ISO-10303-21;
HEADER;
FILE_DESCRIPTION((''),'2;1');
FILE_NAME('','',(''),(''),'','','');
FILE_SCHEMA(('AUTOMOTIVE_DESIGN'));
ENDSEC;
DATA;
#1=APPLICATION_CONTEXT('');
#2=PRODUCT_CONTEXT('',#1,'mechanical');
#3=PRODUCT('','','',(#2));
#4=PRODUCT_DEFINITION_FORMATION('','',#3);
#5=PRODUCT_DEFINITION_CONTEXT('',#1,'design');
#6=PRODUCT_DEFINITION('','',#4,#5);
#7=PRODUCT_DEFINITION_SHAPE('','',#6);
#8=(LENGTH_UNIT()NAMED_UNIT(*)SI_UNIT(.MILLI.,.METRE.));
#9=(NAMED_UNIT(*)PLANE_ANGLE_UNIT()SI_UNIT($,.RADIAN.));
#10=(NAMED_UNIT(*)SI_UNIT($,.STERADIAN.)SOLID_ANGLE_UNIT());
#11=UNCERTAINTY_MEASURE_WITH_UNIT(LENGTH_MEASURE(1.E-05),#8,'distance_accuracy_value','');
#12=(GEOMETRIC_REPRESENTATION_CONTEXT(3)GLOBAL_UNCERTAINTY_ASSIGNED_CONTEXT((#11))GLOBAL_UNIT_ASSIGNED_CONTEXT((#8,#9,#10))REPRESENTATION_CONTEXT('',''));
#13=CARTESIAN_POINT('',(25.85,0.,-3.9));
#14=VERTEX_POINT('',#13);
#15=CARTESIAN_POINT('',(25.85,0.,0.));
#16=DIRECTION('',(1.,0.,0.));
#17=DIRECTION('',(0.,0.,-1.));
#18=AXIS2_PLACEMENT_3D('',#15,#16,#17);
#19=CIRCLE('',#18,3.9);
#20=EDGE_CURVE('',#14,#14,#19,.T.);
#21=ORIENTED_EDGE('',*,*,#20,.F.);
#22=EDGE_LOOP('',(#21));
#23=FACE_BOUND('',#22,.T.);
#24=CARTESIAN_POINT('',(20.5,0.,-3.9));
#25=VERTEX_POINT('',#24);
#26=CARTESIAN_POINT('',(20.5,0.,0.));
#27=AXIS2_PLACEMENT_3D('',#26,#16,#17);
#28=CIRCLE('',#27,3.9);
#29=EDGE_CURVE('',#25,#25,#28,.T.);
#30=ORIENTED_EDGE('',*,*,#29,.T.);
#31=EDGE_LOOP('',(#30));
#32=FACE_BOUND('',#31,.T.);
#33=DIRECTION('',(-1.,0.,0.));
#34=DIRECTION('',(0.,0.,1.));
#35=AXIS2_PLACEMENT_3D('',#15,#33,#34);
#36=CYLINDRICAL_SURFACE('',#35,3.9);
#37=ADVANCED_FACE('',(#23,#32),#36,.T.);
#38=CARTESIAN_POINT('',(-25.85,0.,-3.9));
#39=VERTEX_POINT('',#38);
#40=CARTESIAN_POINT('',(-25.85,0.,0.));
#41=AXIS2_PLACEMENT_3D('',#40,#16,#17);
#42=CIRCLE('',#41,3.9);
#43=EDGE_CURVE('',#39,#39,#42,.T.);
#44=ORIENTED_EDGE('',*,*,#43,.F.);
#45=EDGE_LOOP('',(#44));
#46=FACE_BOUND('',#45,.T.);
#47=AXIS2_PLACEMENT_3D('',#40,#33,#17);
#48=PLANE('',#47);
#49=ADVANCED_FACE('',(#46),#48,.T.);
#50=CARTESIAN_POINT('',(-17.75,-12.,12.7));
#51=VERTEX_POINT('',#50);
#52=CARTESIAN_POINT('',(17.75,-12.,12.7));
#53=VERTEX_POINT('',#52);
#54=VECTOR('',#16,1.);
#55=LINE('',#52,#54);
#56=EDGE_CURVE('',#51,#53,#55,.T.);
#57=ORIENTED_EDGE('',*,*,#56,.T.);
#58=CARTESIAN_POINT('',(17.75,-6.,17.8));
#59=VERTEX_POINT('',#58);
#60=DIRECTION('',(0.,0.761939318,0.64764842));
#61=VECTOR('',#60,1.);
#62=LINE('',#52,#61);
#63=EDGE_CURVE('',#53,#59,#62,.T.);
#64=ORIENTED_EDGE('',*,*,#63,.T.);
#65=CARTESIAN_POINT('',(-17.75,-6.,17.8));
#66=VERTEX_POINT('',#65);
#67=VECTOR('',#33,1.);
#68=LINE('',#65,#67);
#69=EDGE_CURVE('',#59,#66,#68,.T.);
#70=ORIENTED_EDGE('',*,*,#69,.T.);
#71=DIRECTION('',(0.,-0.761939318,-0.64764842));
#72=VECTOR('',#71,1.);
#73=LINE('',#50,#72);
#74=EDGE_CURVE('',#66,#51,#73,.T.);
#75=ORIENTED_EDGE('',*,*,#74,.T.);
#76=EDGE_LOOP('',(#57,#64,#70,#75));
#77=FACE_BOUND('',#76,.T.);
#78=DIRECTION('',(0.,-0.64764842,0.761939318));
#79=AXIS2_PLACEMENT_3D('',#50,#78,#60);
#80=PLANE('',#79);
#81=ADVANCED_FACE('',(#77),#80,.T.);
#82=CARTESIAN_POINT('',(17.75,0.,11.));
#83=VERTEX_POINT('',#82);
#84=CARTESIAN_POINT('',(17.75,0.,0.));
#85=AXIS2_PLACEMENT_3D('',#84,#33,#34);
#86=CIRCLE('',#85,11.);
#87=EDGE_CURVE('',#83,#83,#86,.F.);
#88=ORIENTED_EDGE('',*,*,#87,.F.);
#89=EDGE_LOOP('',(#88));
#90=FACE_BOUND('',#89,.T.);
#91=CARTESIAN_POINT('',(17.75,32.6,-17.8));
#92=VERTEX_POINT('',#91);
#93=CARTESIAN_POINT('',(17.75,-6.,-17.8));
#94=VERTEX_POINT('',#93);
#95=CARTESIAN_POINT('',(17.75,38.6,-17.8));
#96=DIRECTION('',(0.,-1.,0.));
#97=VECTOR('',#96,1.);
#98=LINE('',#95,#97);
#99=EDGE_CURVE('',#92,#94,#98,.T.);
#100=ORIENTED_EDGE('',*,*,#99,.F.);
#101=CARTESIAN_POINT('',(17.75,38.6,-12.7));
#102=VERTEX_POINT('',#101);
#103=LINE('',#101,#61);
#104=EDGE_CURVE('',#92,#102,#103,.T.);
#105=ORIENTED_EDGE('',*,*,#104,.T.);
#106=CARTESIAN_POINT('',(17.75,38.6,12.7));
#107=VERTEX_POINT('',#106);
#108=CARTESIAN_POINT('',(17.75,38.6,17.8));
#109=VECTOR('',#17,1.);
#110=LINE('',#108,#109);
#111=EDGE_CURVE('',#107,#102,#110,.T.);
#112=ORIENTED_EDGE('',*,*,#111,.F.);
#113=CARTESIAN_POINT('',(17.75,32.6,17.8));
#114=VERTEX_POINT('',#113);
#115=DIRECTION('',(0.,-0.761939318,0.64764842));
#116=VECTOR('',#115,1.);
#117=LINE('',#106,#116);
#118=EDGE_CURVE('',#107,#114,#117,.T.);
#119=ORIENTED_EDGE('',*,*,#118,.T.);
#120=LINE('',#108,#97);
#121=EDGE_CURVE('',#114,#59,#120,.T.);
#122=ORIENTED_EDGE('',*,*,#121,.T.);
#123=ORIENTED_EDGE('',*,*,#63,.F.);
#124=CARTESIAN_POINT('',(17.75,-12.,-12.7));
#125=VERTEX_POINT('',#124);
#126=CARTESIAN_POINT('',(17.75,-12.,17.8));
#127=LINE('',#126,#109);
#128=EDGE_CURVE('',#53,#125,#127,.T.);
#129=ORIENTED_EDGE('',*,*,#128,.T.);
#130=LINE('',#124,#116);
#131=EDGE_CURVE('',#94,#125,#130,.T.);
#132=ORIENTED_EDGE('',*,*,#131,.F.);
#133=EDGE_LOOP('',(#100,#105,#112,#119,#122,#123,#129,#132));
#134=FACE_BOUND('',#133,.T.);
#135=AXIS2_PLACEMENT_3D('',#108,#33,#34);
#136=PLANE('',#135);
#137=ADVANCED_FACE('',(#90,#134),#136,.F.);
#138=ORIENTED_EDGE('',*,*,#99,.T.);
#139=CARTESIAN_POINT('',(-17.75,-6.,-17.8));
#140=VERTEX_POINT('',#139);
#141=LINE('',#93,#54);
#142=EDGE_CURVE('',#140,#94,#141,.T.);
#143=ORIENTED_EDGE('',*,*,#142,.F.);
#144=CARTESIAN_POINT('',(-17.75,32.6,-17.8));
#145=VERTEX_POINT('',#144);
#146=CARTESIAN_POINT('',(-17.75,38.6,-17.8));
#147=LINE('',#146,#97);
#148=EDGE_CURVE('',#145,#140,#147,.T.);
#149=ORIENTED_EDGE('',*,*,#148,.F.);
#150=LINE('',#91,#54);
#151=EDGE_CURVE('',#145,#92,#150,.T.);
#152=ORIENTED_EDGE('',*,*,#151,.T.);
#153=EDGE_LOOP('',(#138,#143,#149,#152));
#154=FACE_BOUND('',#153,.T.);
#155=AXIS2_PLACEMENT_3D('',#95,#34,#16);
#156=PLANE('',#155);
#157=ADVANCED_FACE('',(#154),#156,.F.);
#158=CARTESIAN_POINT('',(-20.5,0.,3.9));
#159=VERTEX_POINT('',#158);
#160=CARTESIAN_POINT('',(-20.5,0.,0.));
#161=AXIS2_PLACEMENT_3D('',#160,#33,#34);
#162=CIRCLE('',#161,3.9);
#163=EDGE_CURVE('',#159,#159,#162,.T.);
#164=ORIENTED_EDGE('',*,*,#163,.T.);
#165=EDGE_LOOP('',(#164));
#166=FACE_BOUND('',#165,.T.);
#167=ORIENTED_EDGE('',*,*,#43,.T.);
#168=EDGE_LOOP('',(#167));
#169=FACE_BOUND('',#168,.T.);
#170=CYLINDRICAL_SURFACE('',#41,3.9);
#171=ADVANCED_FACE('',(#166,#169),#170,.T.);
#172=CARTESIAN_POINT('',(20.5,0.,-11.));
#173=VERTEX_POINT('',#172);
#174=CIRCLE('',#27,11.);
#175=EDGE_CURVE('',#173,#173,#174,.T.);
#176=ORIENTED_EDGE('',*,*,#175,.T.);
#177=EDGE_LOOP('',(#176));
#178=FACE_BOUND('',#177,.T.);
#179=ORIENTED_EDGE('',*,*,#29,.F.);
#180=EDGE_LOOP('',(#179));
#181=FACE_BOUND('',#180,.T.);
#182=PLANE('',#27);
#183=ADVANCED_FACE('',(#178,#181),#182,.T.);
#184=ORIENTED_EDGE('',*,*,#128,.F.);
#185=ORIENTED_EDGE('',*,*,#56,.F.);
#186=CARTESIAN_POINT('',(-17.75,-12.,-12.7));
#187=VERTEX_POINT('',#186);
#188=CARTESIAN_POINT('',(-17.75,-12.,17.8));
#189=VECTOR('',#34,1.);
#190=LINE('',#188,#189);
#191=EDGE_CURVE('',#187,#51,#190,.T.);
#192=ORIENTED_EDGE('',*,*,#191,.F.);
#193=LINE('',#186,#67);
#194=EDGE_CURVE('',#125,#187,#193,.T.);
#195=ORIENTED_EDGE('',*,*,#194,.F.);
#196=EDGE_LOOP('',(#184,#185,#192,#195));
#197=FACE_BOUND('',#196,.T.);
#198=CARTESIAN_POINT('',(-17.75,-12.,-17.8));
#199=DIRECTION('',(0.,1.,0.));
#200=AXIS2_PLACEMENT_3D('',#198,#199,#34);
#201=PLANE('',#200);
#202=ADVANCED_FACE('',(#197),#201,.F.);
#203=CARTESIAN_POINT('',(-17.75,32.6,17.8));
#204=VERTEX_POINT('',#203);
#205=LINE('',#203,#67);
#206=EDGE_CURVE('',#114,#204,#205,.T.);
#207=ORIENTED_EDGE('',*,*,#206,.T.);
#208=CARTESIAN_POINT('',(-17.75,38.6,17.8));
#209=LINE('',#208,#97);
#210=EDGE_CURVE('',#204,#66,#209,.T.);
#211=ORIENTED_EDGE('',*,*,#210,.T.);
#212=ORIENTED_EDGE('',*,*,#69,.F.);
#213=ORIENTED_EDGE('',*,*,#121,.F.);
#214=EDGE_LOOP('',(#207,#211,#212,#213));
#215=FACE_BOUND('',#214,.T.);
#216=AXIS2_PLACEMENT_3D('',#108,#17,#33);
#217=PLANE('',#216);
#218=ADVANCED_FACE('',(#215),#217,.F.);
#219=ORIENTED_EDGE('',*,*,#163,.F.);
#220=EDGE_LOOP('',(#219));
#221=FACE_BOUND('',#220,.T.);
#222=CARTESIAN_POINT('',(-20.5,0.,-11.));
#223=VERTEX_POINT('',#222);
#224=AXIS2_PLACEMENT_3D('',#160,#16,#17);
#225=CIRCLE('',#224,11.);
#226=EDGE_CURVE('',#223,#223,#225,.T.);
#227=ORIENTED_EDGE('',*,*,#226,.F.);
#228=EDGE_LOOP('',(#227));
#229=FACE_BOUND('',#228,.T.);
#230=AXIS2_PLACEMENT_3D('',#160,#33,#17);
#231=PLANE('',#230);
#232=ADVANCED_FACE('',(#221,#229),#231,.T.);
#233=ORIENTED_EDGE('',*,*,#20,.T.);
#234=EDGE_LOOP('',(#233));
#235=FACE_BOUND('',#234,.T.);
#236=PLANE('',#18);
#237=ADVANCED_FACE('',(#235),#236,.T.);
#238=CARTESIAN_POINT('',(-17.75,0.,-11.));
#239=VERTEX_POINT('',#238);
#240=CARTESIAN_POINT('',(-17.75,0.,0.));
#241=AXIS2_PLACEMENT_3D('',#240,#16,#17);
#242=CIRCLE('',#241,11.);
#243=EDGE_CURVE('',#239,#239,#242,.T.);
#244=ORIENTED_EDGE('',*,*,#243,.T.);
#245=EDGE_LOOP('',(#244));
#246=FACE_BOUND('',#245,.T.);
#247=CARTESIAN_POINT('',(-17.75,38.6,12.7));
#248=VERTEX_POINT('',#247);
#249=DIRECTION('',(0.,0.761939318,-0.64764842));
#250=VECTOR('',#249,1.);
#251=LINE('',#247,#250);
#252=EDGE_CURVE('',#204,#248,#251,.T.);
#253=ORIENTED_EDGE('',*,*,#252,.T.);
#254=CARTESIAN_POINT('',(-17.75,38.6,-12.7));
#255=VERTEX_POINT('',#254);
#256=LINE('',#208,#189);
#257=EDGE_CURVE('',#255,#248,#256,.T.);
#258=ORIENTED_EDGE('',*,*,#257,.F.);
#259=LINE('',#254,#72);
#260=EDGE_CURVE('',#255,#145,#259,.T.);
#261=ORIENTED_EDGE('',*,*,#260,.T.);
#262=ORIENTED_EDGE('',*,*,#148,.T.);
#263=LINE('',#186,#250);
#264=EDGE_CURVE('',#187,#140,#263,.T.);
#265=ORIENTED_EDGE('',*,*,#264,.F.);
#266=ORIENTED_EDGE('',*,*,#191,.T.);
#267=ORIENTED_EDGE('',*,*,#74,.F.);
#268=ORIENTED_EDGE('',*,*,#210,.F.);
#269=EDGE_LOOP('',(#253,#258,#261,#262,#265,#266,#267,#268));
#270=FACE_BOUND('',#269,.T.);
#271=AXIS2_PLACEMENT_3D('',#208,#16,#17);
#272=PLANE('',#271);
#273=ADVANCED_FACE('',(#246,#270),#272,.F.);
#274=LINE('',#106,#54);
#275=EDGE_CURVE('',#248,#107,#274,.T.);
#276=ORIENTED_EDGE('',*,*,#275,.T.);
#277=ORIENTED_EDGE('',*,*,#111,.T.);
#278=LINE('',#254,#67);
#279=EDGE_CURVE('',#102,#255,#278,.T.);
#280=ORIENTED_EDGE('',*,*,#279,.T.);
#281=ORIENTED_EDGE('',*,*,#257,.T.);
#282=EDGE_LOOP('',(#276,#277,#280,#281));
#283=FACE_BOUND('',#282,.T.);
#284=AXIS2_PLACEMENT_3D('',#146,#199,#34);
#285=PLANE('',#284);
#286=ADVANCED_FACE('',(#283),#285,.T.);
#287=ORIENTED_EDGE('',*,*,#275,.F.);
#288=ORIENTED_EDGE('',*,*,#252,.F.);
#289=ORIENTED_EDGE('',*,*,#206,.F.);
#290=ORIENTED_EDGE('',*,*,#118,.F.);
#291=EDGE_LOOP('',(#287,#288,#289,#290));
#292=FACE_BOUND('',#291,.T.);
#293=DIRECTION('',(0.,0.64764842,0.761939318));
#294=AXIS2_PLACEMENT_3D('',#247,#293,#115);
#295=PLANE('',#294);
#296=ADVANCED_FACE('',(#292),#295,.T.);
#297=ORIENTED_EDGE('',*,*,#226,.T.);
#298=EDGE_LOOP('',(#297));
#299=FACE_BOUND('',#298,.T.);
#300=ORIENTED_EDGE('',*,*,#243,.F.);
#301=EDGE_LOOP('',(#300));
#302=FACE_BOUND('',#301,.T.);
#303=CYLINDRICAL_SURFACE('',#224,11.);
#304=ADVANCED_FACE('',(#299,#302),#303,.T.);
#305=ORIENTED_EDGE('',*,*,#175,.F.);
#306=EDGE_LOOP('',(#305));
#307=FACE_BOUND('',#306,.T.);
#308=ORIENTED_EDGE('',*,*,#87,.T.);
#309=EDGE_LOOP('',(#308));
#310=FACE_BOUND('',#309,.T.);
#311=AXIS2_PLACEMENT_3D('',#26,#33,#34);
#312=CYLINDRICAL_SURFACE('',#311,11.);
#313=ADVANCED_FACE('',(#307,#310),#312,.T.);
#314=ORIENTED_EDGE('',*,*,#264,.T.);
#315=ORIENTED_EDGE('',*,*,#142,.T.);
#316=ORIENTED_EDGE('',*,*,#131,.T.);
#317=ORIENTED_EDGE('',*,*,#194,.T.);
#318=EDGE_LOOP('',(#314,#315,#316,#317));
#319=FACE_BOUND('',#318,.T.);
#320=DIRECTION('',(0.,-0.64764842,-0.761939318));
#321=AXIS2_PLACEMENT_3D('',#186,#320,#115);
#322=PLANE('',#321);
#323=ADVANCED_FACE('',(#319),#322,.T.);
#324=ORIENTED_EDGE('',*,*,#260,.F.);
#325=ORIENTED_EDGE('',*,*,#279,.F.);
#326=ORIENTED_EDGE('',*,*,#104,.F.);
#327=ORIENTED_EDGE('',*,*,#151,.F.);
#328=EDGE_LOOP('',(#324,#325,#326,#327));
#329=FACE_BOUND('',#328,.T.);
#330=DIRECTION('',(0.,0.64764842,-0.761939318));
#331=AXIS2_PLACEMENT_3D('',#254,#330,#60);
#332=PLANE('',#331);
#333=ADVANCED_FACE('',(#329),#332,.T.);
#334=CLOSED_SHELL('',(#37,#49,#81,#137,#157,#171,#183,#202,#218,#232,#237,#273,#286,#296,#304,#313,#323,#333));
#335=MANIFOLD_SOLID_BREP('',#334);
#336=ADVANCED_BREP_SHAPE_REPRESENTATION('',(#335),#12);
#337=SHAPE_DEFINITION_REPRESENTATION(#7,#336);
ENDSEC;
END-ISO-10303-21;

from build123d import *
from OCP.BRepFilletAPI import BRepFilletAPI_MakeChamfer

# Parameters (mm, degrees)
SKETCH2_W           = 35.5
SKETCH2_H           = 35.6
BOSS_EXTRUDE1_DEPTH = 50.6
SKETCH3_R           = 11
BOSS_EXTRUDE2_DEPTH = 2.75
SKETCH4_R           = 3.9
BOSS_EXTRUDE3_DEPTH = 5.35
CHAMFER1_SIZE       = 6
CHAMFER1_SIZE2      = 5.1
MIRROR3_START       = -17.75
MIRROR3_DEPTH       = 35.5


# Read off the part's stored shape, not the designer's step: Mirror3
with BuildPart() as part:
    # Sketch2 → Boss-Extrude1 (new body)
    with BuildSketch(Plane(origin=(0, -12, 0), x_dir=(-1, 0, 0), z_dir=(0, 1, 0))):
        Rectangle(SKETCH2_W, SKETCH2_H)
    extrude(amount=BOSS_EXTRUDE1_DEPTH)

    # Sketch3 → Boss-Extrude2 (add)
    with BuildSketch(Plane(origin=(17.75, 0, 0), x_dir=(0, 0, -1), z_dir=(1, 0, 0))):
        with Locations(Location((0, 0, 0), (0, 0, 180))):
            Circle(SKETCH3_R)
    boss_extrude2 = extrude(amount=BOSS_EXTRUDE2_DEPTH)

    # Sketch4 → Boss-Extrude3 (add)
    with BuildSketch(Plane(origin=(20.5, 0, 0), x_dir=(0, 0, -1), z_dir=(1, 0, 0))):
        Circle(SKETCH4_R)
    boss_extrude3 = extrude(amount=BOSS_EXTRUDE3_DEPTH)

    # Chamfer1: one chamfer whose edges measure the first distance from different faces: ONE call of the kernel's chamfer builder (chamfer() names one face for all edges)
    chamfer1_edges_1 = [part.edges().sort_by_distance(p)[0] for p in [
        (0, 38.6, -17.8),
    ]]
    chamfer1_side_1 = [part.faces().sort_by_distance(p)[0] for p in [
        (0, 13.3, -17.8),
    ]]
    chamfer1_edges_2 = [part.edges().sort_by_distance(p)[0] for p in [
        (0, 38.6, 17.8),
    ]]
    chamfer1_side_2 = [part.faces().sort_by_distance(p)[0] for p in [
        (0, 13.3, 17.8),
    ]]
    chamfer1 = BRepFilletAPI_MakeChamfer(part.part.solid().wrapped)
    for e in chamfer1_edges_1:
        chamfer1.Add(CHAMFER1_SIZE, CHAMFER1_SIZE2, e.wrapped, chamfer1_side_1[0].wrapped)  # the first distance lies on this face
    for e in chamfer1_edges_2:
        chamfer1.Add(CHAMFER1_SIZE, CHAMFER1_SIZE2, e.wrapped, chamfer1_side_2[0].wrapped)  # the first distance lies on this face
    add(Compound.cast(chamfer1.Shape()), mode=Mode.REPLACE)

    # Mirror1: Boss-Extrude2, Boss-Extrude3 across plane
    add(boss_extrude2.mirror(Plane(origin=(0, 0, 0), x_dir=(0, 0, 1), z_dir=(1, 0, 0))))
    add(boss_extrude3.mirror(Plane(origin=(0, 0, 0), x_dir=(0, 0, 1), z_dir=(1, 0, 0))))

    # Mirror3 outline → Mirror3 (cut)
    with BuildSketch(Plane.YZ.offset(MIRROR3_START)):
        Polygon((-6, -17.8), (-12, -12.7), (-12, -17.8), align=None)
        Polygon((-12, 12.7), (-6, 17.8), (-12, 17.8), align=None)
    extrude(amount=MIRROR3_DEPTH, mode=Mode.SUBTRACT)


solid = part.part
